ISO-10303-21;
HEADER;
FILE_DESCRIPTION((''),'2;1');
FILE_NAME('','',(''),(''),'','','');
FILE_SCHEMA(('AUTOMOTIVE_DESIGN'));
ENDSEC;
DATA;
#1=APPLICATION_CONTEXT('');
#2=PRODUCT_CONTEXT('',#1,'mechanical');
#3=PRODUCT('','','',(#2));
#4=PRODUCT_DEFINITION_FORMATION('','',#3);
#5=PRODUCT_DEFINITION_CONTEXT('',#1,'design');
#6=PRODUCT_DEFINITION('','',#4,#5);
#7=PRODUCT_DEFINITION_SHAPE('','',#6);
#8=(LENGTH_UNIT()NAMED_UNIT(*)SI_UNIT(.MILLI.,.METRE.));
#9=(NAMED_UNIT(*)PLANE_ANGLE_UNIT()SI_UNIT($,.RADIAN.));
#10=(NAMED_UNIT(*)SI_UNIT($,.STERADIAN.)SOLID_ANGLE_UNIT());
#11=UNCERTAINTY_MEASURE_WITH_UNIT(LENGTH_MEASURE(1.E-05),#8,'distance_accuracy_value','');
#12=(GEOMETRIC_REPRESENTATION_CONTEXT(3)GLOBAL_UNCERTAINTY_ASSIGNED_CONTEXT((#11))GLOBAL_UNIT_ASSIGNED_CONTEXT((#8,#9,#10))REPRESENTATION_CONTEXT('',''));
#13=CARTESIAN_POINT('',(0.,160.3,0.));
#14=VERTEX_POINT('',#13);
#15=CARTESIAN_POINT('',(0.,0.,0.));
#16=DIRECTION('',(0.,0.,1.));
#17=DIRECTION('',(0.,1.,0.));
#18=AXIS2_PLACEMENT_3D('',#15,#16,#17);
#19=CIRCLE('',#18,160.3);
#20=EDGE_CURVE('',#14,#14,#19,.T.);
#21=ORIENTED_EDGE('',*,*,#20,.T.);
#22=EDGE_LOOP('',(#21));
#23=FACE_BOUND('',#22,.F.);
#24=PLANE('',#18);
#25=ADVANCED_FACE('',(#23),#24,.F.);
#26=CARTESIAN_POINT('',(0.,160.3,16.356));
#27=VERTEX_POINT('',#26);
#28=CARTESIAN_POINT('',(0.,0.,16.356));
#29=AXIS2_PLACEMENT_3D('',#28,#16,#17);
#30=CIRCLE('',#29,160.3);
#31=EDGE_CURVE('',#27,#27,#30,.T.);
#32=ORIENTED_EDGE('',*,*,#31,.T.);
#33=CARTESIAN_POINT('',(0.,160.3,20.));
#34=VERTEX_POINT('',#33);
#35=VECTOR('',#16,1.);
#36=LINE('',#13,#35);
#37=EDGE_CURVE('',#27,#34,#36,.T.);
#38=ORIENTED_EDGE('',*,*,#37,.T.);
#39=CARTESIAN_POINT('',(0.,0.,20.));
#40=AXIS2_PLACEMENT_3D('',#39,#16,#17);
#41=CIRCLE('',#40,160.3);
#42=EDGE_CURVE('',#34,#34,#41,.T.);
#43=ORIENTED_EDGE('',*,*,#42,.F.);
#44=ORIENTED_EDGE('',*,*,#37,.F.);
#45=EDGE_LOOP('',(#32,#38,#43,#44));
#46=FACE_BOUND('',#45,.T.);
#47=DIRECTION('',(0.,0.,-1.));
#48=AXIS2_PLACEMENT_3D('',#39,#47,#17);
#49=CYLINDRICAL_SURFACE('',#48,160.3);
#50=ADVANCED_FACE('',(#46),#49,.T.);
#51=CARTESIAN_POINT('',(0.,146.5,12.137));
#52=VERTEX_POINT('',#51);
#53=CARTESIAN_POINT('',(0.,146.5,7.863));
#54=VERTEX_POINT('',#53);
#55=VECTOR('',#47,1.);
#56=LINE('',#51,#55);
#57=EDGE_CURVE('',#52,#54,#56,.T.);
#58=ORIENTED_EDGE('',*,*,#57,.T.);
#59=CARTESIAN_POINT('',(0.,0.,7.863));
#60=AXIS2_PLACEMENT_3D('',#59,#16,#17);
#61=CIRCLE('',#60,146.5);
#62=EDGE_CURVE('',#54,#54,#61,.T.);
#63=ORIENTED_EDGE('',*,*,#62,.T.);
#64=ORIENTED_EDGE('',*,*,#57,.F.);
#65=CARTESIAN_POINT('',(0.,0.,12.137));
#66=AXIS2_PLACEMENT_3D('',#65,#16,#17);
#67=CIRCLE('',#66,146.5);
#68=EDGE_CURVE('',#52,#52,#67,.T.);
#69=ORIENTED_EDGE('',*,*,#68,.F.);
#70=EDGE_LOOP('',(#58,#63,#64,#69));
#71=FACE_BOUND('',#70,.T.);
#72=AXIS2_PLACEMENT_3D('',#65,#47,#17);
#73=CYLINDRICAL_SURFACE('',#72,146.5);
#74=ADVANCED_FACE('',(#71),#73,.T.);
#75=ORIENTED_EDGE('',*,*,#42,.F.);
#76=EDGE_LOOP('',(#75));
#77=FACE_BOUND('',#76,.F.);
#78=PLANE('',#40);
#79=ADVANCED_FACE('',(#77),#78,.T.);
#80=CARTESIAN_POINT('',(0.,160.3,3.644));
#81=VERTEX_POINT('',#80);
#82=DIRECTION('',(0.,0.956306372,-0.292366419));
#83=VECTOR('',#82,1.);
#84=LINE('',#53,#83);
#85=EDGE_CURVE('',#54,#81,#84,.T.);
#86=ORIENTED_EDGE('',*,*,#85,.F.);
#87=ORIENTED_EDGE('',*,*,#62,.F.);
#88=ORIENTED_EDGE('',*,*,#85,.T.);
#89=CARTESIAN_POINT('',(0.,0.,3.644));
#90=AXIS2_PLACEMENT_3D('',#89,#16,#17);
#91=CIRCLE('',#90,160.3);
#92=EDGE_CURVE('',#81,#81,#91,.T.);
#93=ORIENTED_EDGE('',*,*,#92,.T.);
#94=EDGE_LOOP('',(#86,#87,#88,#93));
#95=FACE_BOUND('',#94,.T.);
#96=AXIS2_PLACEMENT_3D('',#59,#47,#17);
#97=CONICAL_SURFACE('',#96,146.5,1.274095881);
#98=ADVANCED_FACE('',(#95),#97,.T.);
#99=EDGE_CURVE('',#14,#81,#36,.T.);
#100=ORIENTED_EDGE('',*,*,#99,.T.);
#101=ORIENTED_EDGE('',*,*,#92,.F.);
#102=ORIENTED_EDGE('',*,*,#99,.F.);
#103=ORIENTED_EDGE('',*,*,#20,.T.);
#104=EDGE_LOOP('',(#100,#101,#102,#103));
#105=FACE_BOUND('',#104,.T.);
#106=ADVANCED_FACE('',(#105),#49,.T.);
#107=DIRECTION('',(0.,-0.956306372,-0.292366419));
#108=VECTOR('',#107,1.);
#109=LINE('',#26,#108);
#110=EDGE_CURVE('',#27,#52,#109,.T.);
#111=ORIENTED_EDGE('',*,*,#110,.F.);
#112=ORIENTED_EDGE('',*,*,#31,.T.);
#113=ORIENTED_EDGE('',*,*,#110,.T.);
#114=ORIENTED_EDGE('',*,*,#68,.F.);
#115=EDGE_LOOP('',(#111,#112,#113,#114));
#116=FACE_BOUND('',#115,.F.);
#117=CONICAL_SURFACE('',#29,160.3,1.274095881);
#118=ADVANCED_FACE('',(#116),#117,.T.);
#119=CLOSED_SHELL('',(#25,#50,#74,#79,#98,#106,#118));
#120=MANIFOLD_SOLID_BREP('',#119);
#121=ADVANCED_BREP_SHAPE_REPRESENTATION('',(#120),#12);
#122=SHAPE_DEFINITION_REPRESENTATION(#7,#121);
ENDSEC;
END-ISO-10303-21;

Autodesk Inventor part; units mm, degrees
ref_plane "YZ Plane" through (0, 0, 0) normal (1, 0, 0) x (0, 1, 0)
ref_plane "XZ Plane" through (0, 0, 0) normal (0, 1, 0) x (-1, 0, 0)
sketch "Boceto principal" plane through (0, 0, 0) normal (1, 0, 0) x (0, 1, 0)
  line L0 (0, 20) -> (160.3, 20)
  line L1 (160.3, 20) -> (160.3, 16.356)
  line L2 (160.3, 16.356) -> (146.5, 12.137)
  line L3 (146.5, 12.137) -> (146.5, 7.863)
  line L4 (146.5, 7.863) -> (160.3, 3.644)
  line L5 (160.3, 3.644) -> (160.3, 0)
  line L6 (160.3, 0) -> (0, 0)
  line L7 (157.5, 15.5) -> (157.5, 4.5) construction
  line L8 (146.5, 10) -> (157.5, 10) construction
  line L9 (160.3, 16.356) -> (160.3, 3.644)
  line L10 (0, -4) -> (0, 24) projected
  line L11 (0, 0) -> (0, 20)
  dimension "d0" = 11
  dimension "d1" = 34
  dimension "d2" = 2.8
  dimension "d6" = 20
  dimension "d21" = 315
  dimension "d25" = 13.8
  dimension "d27" = 10
ref_plane "Plano de correa" through (0, 146.5, 10) normal (0, 0, 1) x (1, 0, 0)
revolve "Cuerpo" add sketch "Boceto principal" angle 360 about axis through (0, 0, -10) along (0, 0, 1)
revolve "Para ranuras" cut sketch "Boceto principal" angle 360 about axis through (0, 0, -10) along (0, 0, 1) contours L9 L4 L3 L2
fillet "Empalme externo" [suppressed]
fillet "Empalme interno" [suppressed]
pattern_of_one "Patrón para ranuras"
equation "\"d0\" = da_Bw"
equation "\"d1\" = da_Alfa"
equation "\"d2\" = da_c"
equation "\"d21\" = da_Dw"
equation "\"d25\" = da_Hd"
equation "\"d27\" = da_Se"
equation "\"da_r1\" = 0"
equation "\"da_r2\" = 0"
equation "\"d18\" = da_Sg"
equation "\"da_Bw\" = 11"
equation "\"da_Alfa\" = 34deg"
equation "\"da_c\" = 2.8"
equation "\"da_Dw\" = 315"
equation "\"da_Hd\" = 13.8"
equation "\"da_Se\" = 10"
equation "\"da_Sg\" = 15"
properties part number "Polea ranurada2" material "Steel"
